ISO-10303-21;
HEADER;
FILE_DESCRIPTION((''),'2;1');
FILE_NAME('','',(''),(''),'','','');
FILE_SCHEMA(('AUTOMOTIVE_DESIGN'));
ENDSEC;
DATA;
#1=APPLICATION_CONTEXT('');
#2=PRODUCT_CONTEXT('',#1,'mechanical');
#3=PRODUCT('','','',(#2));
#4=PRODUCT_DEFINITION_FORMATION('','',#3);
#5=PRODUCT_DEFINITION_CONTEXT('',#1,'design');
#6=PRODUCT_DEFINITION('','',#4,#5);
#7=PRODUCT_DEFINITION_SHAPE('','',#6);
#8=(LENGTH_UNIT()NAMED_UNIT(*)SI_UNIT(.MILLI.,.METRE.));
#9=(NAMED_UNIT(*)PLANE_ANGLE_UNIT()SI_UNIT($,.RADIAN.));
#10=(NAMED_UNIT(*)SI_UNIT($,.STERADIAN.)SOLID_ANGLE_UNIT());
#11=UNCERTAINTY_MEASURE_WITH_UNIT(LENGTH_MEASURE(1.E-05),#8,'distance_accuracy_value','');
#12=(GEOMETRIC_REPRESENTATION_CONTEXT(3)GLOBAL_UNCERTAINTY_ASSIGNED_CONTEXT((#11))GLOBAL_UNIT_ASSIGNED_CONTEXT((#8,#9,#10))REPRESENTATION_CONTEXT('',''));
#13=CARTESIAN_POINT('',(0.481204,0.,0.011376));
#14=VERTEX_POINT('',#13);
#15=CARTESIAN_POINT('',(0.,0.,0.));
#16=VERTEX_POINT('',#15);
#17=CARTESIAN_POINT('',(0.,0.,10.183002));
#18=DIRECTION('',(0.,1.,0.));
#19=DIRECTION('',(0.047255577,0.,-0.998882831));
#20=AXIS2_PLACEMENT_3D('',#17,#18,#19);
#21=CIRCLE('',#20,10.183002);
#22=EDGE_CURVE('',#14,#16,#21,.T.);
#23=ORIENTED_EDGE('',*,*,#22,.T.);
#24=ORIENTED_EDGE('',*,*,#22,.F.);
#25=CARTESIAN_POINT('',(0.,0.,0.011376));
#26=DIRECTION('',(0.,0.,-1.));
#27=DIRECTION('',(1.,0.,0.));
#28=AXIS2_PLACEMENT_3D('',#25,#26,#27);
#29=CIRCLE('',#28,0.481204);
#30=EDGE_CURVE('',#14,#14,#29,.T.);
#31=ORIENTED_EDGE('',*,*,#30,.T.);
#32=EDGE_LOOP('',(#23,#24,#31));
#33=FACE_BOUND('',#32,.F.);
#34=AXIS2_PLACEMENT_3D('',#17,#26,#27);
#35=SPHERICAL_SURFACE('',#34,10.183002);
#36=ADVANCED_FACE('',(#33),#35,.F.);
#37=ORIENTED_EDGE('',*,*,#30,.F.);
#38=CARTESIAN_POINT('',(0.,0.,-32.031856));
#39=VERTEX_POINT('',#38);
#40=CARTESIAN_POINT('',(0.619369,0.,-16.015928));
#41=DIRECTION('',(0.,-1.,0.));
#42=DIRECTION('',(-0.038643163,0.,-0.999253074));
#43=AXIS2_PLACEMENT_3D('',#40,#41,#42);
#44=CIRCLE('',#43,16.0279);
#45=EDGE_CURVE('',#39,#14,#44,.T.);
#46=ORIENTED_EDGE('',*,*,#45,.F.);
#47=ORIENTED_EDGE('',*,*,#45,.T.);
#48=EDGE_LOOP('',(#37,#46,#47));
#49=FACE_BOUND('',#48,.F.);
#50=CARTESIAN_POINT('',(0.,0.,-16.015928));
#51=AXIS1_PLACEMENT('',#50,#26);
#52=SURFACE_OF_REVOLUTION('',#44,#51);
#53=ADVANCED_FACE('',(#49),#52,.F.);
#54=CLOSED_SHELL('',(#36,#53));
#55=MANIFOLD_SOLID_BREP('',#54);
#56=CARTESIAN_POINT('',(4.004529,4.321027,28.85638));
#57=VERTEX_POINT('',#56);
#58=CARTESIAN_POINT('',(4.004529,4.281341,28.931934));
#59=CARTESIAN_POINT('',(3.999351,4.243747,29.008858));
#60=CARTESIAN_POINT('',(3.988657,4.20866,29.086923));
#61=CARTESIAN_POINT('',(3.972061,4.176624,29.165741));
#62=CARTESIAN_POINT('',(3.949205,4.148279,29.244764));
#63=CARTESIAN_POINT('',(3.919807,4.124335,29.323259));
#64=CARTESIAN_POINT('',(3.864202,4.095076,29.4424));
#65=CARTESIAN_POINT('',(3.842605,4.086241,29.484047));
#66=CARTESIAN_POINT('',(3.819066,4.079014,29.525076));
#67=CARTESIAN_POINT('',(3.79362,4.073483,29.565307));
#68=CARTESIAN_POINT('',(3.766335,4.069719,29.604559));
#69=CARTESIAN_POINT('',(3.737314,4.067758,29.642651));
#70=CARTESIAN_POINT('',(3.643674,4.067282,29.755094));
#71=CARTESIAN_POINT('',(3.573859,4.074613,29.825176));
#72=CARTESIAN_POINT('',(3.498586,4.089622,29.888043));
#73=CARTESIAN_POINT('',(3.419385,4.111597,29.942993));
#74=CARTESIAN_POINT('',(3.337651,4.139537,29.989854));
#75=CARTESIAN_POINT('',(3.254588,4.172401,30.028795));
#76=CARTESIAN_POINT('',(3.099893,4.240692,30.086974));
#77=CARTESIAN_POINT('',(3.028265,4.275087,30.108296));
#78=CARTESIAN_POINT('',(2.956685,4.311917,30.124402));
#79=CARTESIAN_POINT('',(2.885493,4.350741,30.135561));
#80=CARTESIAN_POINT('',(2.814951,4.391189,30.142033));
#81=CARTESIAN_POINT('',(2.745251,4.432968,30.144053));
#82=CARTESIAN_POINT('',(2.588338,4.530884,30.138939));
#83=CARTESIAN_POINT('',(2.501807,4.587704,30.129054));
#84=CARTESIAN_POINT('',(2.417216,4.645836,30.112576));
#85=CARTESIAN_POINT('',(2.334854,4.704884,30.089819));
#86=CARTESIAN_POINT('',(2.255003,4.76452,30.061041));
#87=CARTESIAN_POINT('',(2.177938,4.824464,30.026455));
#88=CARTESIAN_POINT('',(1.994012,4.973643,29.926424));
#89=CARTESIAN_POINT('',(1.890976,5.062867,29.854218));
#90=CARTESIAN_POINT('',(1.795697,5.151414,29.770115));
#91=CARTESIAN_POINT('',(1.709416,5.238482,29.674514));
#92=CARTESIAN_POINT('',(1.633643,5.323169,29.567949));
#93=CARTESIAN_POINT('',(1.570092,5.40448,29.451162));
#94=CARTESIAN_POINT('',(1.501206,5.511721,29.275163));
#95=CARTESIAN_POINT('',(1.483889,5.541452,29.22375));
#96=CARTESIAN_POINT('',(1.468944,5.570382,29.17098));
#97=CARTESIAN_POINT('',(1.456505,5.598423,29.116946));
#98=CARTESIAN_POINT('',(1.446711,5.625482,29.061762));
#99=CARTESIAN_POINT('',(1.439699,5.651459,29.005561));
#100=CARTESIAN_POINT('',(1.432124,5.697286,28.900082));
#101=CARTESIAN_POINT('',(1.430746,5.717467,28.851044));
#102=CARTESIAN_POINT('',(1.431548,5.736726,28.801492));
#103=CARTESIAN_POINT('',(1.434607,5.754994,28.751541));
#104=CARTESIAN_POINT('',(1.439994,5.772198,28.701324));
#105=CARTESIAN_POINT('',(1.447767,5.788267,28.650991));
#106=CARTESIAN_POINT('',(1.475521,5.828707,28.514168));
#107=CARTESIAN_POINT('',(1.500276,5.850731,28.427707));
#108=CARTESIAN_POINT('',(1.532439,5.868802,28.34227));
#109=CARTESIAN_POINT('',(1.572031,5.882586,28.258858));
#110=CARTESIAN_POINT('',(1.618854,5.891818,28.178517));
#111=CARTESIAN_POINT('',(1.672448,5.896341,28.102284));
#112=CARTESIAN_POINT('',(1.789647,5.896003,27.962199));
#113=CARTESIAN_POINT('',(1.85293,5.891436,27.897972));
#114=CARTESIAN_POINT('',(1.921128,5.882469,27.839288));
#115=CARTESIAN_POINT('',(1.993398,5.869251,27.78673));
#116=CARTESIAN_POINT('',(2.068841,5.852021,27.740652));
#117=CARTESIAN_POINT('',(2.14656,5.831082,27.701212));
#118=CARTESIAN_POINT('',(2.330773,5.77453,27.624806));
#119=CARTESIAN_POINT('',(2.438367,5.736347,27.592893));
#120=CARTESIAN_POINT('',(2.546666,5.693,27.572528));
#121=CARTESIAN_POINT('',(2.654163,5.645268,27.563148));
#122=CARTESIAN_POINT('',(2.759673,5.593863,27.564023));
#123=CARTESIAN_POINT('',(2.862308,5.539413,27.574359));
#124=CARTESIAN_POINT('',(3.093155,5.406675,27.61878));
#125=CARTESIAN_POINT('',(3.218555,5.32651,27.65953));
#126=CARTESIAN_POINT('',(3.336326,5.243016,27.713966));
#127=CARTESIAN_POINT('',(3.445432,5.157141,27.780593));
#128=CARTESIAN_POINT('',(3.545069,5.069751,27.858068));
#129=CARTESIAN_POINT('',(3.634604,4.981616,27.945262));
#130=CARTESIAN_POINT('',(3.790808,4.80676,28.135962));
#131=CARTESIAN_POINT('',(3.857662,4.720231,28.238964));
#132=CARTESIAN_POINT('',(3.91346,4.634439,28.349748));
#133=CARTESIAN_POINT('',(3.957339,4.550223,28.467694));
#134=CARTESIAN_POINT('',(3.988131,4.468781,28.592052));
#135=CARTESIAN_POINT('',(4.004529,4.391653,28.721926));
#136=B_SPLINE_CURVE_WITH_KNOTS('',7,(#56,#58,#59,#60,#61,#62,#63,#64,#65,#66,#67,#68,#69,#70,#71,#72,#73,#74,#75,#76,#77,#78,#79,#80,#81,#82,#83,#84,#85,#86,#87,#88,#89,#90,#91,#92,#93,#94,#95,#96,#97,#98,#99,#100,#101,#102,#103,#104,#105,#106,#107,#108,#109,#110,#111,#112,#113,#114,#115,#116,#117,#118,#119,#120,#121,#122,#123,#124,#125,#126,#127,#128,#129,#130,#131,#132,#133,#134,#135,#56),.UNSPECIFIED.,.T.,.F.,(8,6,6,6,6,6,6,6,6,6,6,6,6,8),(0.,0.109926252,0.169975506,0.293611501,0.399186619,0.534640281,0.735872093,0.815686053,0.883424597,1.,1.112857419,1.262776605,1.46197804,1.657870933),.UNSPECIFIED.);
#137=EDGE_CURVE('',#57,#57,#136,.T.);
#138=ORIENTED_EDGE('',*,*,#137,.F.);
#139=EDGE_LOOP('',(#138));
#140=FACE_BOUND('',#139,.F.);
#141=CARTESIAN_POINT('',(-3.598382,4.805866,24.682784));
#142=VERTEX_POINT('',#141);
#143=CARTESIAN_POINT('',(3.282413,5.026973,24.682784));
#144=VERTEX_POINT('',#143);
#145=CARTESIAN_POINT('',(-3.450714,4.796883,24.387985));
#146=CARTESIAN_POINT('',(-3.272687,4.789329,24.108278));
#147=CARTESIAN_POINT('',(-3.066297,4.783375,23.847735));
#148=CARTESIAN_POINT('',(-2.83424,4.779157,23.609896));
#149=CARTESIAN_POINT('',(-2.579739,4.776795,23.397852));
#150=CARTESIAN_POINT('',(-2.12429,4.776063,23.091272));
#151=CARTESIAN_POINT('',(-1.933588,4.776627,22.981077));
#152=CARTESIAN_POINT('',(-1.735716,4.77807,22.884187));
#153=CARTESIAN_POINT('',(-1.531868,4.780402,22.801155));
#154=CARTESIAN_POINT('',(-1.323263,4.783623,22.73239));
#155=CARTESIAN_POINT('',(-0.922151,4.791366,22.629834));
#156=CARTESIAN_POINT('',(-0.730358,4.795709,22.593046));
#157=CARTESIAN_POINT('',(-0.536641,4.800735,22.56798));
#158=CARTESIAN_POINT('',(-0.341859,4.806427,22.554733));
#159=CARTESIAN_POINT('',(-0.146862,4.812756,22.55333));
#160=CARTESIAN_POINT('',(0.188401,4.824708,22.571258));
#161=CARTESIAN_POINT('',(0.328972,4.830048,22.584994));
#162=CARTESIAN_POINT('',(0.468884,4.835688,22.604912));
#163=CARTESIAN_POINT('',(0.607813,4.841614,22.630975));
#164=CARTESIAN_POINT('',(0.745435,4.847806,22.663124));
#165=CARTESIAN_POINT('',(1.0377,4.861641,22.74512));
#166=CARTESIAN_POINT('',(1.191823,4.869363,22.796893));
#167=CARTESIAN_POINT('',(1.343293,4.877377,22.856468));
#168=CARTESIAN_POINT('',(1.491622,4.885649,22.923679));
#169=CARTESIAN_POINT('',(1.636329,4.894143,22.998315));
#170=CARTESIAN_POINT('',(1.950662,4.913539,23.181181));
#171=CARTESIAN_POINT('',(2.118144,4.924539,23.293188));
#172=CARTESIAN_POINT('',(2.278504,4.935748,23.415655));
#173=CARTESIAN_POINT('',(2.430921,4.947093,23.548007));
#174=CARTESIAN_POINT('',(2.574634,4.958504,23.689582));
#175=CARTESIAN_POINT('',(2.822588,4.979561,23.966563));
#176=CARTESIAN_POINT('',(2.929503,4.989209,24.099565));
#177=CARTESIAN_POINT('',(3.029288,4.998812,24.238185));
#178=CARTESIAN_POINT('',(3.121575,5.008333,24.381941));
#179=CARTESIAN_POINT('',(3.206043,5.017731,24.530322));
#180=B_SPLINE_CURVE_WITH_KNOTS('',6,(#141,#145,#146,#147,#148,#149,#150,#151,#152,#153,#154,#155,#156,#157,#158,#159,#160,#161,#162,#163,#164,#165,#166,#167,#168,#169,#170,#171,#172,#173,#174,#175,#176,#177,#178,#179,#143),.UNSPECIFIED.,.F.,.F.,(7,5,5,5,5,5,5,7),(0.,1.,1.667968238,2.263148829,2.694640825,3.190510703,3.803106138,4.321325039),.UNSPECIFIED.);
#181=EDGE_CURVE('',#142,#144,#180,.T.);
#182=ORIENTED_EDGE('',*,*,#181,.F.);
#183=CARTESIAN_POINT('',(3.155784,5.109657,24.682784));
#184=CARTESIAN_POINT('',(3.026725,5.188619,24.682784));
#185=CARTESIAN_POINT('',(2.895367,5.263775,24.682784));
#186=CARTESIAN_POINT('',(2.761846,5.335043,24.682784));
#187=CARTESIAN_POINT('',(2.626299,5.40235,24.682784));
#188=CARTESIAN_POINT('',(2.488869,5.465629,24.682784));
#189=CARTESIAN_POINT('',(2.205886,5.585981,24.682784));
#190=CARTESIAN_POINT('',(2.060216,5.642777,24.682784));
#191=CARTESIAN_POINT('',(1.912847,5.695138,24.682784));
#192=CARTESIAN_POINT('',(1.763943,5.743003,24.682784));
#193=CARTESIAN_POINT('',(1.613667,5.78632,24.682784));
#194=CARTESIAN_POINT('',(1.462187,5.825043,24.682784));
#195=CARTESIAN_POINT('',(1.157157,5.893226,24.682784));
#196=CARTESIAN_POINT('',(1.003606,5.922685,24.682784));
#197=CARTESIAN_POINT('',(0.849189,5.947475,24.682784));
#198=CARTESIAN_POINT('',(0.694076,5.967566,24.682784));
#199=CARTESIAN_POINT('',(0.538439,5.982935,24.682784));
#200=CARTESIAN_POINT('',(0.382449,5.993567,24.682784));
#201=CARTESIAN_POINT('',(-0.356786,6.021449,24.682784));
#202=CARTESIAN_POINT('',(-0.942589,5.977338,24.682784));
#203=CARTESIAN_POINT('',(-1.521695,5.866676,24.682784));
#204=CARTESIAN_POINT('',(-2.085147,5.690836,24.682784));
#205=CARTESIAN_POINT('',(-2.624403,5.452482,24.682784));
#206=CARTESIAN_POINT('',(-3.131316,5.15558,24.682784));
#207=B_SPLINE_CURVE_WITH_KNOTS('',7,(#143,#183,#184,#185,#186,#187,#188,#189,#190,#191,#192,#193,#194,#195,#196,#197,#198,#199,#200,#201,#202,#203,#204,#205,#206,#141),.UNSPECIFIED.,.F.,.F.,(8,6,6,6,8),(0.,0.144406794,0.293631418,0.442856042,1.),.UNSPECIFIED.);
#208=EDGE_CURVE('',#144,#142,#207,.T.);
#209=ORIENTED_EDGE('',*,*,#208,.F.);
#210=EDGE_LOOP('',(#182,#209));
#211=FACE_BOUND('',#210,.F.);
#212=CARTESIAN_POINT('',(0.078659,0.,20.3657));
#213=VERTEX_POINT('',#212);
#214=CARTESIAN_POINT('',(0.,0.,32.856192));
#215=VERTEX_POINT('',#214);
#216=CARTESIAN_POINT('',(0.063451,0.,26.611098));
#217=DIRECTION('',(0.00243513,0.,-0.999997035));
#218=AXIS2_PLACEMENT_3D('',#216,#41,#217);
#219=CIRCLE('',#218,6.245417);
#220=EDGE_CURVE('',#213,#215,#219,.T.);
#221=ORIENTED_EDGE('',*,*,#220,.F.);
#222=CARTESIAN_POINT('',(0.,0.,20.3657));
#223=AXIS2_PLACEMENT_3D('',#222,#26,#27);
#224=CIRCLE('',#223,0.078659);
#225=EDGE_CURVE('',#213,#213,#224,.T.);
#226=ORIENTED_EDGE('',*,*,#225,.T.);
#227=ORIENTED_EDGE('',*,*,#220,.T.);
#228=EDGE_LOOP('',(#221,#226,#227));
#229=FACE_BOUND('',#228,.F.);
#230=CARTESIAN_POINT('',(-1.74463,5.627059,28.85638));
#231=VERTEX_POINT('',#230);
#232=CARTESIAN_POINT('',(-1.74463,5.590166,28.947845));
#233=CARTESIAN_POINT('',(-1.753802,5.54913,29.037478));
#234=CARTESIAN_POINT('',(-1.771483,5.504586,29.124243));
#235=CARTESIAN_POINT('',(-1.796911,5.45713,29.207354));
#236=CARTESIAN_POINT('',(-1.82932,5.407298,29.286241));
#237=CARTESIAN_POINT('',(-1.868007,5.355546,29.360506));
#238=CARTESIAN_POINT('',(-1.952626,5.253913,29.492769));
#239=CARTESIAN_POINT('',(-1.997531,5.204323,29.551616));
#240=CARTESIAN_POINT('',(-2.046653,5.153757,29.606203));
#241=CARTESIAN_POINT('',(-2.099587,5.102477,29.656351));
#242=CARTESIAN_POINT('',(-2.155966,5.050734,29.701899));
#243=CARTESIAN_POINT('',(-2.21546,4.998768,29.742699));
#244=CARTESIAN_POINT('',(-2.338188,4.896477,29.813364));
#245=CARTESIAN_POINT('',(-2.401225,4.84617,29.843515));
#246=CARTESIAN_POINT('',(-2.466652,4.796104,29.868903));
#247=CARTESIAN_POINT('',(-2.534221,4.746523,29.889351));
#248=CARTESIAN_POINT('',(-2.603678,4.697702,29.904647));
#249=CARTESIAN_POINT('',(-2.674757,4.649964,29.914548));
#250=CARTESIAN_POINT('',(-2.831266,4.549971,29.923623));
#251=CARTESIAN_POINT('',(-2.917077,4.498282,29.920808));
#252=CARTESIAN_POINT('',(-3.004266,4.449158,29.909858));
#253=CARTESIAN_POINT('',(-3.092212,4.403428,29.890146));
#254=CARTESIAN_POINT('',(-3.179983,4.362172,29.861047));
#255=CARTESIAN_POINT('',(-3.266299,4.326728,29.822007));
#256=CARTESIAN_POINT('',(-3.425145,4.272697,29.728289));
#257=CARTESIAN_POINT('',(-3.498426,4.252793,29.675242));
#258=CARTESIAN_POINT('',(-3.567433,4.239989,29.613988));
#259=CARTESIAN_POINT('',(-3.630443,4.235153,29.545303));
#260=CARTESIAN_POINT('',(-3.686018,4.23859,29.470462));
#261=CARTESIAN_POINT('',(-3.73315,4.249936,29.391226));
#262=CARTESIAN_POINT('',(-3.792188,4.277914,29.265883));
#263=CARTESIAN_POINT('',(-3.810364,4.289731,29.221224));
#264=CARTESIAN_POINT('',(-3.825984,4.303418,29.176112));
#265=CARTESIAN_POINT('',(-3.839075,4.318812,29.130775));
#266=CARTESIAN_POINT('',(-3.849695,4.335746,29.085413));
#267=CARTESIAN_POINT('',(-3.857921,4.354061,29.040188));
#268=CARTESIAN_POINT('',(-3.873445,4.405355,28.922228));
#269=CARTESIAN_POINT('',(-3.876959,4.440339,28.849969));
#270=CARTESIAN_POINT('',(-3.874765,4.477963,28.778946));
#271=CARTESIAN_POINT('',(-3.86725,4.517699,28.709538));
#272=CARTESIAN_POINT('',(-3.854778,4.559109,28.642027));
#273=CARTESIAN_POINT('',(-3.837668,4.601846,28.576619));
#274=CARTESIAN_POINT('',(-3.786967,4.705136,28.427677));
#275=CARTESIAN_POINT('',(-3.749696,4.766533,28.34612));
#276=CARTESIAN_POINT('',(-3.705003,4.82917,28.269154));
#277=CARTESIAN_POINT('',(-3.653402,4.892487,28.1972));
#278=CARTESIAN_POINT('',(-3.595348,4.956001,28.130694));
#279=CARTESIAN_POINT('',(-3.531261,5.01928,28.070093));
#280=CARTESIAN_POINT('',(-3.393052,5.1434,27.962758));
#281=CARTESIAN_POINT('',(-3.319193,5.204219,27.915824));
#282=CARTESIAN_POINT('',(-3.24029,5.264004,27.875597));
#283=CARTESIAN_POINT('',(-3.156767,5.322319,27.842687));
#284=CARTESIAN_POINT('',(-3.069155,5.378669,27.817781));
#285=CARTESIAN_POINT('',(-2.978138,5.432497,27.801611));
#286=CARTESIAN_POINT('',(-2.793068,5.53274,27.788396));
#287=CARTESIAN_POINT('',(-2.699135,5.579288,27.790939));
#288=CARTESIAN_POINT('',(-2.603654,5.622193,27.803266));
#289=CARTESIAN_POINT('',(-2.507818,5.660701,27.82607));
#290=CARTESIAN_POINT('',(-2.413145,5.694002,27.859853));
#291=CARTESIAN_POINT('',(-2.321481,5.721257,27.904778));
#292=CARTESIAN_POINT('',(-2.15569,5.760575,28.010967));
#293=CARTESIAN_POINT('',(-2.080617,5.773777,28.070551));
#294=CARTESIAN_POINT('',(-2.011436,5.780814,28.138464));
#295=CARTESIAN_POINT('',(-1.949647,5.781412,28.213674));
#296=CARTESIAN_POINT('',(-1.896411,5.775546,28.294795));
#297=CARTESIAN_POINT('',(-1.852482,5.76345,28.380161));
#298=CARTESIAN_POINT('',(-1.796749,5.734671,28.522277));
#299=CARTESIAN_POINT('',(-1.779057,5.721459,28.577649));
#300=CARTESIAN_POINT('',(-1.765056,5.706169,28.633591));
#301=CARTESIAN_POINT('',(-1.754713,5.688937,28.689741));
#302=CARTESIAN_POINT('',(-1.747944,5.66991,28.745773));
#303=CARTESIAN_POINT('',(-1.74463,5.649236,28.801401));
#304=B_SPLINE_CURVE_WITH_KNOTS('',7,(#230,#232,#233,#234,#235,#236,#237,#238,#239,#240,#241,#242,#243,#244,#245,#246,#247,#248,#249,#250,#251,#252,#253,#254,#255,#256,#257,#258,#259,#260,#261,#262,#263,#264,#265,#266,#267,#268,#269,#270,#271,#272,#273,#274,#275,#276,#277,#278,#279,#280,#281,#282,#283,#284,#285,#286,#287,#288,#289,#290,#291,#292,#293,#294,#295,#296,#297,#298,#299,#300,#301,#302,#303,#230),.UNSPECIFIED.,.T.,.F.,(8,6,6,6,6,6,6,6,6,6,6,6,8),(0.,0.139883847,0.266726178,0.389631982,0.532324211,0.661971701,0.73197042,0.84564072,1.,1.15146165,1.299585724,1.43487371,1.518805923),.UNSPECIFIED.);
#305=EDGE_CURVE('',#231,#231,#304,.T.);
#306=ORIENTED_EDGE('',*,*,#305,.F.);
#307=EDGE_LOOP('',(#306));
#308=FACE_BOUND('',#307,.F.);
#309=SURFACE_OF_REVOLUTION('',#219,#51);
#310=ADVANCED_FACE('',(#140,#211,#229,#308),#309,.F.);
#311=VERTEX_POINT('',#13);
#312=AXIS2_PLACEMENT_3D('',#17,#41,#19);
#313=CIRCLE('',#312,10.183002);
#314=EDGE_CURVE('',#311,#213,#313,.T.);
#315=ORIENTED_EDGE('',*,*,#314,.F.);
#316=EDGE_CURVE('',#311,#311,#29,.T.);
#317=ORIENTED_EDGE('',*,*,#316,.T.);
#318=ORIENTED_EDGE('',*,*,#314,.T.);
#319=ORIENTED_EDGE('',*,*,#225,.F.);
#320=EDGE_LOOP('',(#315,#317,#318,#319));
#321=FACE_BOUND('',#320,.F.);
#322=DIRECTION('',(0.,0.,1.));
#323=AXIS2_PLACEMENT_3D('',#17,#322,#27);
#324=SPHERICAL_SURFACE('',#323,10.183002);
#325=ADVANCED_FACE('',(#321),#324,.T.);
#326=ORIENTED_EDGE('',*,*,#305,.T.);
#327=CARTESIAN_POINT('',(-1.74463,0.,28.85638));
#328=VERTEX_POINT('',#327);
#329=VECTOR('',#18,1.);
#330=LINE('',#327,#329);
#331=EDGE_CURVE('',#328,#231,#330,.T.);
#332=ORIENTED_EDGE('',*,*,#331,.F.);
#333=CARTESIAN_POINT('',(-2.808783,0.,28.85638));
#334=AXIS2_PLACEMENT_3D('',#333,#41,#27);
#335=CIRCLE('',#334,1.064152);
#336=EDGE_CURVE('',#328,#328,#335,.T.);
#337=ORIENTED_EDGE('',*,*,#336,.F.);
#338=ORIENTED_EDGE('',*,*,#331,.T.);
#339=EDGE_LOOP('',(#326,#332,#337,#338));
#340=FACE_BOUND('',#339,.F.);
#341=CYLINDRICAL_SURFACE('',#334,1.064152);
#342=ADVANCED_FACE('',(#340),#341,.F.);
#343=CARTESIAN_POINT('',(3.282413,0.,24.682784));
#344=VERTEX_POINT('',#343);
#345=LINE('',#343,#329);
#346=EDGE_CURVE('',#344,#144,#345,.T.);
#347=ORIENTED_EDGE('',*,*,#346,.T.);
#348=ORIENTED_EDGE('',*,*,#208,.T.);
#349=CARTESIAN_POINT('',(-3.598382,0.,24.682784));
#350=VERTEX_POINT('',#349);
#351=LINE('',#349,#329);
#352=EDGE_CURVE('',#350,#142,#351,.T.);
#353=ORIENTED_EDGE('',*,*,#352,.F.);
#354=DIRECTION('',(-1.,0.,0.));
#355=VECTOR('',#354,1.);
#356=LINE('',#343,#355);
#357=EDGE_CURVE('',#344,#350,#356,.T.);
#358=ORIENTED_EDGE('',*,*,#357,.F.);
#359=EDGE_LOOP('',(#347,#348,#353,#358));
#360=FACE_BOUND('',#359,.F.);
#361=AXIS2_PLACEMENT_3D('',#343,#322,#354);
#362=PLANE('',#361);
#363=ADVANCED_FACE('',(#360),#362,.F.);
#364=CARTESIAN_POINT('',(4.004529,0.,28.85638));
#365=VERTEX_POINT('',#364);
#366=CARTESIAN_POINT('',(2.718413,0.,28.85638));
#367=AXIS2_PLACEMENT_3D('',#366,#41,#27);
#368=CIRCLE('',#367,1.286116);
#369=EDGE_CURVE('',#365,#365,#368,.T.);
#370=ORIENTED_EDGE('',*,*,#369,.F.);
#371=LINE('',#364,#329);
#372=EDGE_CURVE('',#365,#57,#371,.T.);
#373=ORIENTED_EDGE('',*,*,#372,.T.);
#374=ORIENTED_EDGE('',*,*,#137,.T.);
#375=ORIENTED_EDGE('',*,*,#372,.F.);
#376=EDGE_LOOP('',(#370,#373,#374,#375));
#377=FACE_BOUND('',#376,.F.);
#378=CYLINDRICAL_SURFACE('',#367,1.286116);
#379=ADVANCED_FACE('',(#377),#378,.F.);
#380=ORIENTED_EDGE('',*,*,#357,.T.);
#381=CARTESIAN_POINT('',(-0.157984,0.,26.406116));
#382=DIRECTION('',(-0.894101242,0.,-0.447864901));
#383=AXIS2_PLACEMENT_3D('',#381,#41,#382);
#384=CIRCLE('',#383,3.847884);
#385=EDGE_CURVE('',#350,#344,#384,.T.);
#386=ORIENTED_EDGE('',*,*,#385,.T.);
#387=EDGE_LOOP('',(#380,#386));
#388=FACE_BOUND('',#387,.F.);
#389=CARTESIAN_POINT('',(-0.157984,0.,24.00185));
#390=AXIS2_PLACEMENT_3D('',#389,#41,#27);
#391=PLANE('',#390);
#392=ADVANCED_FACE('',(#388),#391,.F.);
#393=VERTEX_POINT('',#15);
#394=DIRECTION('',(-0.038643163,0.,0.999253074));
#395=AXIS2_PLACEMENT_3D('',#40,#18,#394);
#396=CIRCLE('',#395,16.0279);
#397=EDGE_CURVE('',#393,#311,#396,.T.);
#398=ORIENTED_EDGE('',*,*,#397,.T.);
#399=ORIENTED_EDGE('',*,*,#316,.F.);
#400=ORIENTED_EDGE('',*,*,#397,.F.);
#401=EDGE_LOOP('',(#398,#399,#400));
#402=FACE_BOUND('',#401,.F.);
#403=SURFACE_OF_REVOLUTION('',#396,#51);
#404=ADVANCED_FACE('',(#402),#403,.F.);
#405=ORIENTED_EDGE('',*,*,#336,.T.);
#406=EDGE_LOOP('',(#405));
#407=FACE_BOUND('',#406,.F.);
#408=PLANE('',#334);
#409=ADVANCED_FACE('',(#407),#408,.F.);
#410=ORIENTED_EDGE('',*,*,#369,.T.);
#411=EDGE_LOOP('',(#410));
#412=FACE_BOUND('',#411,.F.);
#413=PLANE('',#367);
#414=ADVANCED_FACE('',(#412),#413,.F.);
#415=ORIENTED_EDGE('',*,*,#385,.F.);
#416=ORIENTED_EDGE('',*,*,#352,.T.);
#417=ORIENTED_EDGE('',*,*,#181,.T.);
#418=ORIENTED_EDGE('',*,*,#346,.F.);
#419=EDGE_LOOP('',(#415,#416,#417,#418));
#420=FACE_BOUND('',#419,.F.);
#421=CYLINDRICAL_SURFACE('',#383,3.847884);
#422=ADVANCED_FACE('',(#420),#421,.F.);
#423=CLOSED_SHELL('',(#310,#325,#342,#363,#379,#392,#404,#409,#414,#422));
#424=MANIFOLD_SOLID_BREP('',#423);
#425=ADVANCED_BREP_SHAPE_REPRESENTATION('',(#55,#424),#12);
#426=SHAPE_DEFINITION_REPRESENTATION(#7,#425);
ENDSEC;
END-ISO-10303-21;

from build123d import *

# Parameters (mm, degrees)
F2_R     = 1.0641522899
F2_R_2   = 1.2861157266
F3_DEPTH = 25.4


with BuildPart() as f1:
    # F0 (on Front) → F1 (revolve)
    with BuildSketch(Plane.XZ):
        with BuildLine():
            ThreePointArc((0.4812036321, 0.0113761322), (0.2406690424, 0.0028444303), (0, 0))
            Line((0, 0), (0, -32.0318564773))
            ThreePointArc((0, -32.0318564773), (16.6454616461, -16.256597281), (0.4812036321, 0.0113761322))
        make_face()
    revolve(axis=Axis((0, 0, -16.0159282386), (0, 0, -1)))


with BuildPart() as f1b:
    # F0 (on Front) → F1, piece 2 (revolve)
    with BuildSketch(Plane.XZ):
        with BuildLine():
            Line((0, 20.3660037369), (0, 0))
            ThreePointArc((0, 0), (0.2405591087, 0.0074945621), (0.4812036321, 0.0113761322))
            ThreePointArc((0.4812036321, 0.0113761322), (10.1810110476, 10.3843500772), (0.0786594626, 20.3656999265))
            ThreePointArc((0.0786594626, 20.3656999265), (0.039329253, 20.3657279925), (0, 20.3660037369))
        make_face()
        with BuildLine():
            ThreePointArc((0.0786594626, 20.3656999265), (0.0393300247, 20.365927784), (0, 20.3660037369))
            ThreePointArc((0, 20.3660037369), (0.039329253, 20.3657279925), (0.0786594626, 20.3656999265))
        make_face()
        with BuildLine():
            Line((0, 32.8561924398), (0, 20.3660037369))
            ThreePointArc((0, 20.3660037369), (0.0393300247, 20.365927784), (0.0786594626, 20.3656999265))
            ThreePointArc((0.0786594626, 20.3656999265), (6.3087438977, 26.650428113), (0, 32.8561924398))
        make_face()
    revolve(axis=Axis((0, 0, -16.0159282386), (0, 0, -1)))

    # F2 (on Front) → F3 (cut)
    with BuildSketch(Plane.XZ):
        with Locations((-2.8087825049, 28.8563799113)):
            Circle(F2_R)
        with Locations((2.7184134815, 28.8563799113)):
            Circle(F2_R_2)
        with BuildLine():
            Line((3.2824131195, 24.682784453), (-3.5983817652, 24.682784453))
            ThreePointArc((-3.5983817652, 24.682784453), (-0.1579843229, 22.5582328984), (3.2824131195, 24.682784453))
        make_face()
    extrude(amount=-F3_DEPTH, mode=Mode.SUBTRACT)


solid = Compound([f1.part, f1b.part])
